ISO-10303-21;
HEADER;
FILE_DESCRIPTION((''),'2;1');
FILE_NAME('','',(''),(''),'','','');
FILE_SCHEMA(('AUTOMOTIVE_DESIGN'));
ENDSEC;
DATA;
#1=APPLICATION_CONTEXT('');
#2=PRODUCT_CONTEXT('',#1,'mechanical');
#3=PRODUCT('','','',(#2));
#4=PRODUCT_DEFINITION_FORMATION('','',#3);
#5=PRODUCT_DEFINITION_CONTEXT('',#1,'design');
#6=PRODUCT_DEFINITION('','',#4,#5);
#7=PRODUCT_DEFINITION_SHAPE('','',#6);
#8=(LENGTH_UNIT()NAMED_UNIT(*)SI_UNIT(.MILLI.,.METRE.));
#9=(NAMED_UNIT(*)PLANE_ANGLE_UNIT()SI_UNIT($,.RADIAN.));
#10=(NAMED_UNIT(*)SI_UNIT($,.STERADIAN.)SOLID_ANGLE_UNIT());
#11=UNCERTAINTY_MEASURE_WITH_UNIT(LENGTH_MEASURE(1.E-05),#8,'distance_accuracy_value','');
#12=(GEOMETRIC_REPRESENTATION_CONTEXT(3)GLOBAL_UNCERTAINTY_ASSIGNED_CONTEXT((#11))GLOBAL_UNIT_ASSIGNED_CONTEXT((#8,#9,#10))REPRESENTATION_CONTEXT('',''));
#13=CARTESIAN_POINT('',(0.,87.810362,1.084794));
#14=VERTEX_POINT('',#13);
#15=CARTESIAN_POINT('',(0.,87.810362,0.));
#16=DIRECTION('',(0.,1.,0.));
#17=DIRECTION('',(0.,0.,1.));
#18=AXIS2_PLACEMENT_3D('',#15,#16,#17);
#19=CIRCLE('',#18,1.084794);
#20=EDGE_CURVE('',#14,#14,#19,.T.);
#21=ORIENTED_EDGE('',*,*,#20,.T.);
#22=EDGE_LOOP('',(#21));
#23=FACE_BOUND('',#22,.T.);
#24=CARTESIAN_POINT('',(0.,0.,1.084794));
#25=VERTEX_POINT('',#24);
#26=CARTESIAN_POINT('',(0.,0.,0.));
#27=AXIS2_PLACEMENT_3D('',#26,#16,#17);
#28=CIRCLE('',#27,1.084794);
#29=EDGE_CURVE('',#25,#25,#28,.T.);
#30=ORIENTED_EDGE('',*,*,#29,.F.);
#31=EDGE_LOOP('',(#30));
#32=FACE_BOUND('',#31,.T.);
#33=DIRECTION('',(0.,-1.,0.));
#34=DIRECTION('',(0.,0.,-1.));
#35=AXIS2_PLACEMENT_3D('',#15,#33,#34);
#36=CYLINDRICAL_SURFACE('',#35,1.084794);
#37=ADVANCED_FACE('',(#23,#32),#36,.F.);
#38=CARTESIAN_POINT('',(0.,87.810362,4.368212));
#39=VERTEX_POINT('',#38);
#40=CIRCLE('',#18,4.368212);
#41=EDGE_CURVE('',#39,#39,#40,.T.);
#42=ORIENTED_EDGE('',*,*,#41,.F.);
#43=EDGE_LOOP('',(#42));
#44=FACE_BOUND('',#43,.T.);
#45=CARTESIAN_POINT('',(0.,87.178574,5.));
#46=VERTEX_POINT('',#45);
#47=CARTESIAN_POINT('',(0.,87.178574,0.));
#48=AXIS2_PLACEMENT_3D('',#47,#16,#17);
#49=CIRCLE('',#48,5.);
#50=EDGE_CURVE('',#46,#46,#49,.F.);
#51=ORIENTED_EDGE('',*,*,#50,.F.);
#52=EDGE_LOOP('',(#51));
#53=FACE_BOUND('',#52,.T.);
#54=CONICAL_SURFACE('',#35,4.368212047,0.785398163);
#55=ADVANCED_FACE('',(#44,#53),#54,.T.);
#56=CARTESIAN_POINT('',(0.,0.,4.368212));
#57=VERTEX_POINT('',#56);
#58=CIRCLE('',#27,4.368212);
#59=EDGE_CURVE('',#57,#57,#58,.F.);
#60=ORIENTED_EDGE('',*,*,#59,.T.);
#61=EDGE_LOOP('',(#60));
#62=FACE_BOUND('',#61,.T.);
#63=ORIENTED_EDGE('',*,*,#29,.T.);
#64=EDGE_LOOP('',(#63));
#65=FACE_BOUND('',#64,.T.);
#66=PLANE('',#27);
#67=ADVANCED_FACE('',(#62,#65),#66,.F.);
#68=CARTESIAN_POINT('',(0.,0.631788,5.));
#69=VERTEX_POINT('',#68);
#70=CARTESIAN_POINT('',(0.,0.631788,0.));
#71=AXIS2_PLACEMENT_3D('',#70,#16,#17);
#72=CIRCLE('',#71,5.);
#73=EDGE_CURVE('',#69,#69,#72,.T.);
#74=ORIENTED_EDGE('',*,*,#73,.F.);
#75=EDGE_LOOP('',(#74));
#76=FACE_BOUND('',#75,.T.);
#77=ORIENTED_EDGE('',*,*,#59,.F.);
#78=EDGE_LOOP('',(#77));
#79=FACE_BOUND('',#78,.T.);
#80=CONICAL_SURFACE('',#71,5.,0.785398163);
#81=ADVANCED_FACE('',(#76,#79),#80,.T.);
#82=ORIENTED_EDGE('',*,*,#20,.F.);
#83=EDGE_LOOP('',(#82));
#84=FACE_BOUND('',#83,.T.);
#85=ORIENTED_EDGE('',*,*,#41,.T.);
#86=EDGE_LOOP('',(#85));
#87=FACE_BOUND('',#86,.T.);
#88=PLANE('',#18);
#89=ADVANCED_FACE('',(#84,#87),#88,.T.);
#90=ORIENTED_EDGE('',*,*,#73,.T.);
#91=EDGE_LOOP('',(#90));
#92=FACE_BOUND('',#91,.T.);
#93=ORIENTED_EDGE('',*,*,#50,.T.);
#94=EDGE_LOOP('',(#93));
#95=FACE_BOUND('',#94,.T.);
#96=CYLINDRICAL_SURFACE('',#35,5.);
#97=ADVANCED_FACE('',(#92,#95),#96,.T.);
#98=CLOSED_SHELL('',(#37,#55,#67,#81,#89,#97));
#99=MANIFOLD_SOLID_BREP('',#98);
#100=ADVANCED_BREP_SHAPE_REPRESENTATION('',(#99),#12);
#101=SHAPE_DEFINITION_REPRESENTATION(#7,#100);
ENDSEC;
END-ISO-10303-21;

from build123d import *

# Parameters (mm, degrees)
SKETCH1_R           = 5
BOSS_EXTRUDE1_DEPTH = 87.810362406
SKETCH2_R           = 1.084794339
CUT_EXTRUDE1_DEPTH  = 89.094606793
CHAMFER1_SIZE       = 0.631787953


with BuildPart() as part:
    # Sketch1 → Boss-Extrude1 (new body)
    with BuildSketch(Plane(origin=(0, 0, 0), x_dir=(1, 0, 0), z_dir=(0, 1, 0))):
        Circle(SKETCH1_R)
    extrude(amount=BOSS_EXTRUDE1_DEPTH)

    # Sketch2 → Cut-Extrude1 (cut, through all)
    with BuildSketch(Plane(origin=(0, 0, 0), x_dir=(1, 0, 0), z_dir=(0, 1, 0))):
        Circle(SKETCH2_R)
    extrude(amount=CUT_EXTRUDE1_DEPTH, mode=Mode.SUBTRACT)

    # Chamfer1
    chamfer1_edges = [part.edges().sort_by_distance(p)[0] for p in [
        (-5, 87.810362406, 0),
        (-5, 0, 0),
    ]]
    chamfer(chamfer1_edges, length=CHAMFER1_SIZE)


solid = part.part
